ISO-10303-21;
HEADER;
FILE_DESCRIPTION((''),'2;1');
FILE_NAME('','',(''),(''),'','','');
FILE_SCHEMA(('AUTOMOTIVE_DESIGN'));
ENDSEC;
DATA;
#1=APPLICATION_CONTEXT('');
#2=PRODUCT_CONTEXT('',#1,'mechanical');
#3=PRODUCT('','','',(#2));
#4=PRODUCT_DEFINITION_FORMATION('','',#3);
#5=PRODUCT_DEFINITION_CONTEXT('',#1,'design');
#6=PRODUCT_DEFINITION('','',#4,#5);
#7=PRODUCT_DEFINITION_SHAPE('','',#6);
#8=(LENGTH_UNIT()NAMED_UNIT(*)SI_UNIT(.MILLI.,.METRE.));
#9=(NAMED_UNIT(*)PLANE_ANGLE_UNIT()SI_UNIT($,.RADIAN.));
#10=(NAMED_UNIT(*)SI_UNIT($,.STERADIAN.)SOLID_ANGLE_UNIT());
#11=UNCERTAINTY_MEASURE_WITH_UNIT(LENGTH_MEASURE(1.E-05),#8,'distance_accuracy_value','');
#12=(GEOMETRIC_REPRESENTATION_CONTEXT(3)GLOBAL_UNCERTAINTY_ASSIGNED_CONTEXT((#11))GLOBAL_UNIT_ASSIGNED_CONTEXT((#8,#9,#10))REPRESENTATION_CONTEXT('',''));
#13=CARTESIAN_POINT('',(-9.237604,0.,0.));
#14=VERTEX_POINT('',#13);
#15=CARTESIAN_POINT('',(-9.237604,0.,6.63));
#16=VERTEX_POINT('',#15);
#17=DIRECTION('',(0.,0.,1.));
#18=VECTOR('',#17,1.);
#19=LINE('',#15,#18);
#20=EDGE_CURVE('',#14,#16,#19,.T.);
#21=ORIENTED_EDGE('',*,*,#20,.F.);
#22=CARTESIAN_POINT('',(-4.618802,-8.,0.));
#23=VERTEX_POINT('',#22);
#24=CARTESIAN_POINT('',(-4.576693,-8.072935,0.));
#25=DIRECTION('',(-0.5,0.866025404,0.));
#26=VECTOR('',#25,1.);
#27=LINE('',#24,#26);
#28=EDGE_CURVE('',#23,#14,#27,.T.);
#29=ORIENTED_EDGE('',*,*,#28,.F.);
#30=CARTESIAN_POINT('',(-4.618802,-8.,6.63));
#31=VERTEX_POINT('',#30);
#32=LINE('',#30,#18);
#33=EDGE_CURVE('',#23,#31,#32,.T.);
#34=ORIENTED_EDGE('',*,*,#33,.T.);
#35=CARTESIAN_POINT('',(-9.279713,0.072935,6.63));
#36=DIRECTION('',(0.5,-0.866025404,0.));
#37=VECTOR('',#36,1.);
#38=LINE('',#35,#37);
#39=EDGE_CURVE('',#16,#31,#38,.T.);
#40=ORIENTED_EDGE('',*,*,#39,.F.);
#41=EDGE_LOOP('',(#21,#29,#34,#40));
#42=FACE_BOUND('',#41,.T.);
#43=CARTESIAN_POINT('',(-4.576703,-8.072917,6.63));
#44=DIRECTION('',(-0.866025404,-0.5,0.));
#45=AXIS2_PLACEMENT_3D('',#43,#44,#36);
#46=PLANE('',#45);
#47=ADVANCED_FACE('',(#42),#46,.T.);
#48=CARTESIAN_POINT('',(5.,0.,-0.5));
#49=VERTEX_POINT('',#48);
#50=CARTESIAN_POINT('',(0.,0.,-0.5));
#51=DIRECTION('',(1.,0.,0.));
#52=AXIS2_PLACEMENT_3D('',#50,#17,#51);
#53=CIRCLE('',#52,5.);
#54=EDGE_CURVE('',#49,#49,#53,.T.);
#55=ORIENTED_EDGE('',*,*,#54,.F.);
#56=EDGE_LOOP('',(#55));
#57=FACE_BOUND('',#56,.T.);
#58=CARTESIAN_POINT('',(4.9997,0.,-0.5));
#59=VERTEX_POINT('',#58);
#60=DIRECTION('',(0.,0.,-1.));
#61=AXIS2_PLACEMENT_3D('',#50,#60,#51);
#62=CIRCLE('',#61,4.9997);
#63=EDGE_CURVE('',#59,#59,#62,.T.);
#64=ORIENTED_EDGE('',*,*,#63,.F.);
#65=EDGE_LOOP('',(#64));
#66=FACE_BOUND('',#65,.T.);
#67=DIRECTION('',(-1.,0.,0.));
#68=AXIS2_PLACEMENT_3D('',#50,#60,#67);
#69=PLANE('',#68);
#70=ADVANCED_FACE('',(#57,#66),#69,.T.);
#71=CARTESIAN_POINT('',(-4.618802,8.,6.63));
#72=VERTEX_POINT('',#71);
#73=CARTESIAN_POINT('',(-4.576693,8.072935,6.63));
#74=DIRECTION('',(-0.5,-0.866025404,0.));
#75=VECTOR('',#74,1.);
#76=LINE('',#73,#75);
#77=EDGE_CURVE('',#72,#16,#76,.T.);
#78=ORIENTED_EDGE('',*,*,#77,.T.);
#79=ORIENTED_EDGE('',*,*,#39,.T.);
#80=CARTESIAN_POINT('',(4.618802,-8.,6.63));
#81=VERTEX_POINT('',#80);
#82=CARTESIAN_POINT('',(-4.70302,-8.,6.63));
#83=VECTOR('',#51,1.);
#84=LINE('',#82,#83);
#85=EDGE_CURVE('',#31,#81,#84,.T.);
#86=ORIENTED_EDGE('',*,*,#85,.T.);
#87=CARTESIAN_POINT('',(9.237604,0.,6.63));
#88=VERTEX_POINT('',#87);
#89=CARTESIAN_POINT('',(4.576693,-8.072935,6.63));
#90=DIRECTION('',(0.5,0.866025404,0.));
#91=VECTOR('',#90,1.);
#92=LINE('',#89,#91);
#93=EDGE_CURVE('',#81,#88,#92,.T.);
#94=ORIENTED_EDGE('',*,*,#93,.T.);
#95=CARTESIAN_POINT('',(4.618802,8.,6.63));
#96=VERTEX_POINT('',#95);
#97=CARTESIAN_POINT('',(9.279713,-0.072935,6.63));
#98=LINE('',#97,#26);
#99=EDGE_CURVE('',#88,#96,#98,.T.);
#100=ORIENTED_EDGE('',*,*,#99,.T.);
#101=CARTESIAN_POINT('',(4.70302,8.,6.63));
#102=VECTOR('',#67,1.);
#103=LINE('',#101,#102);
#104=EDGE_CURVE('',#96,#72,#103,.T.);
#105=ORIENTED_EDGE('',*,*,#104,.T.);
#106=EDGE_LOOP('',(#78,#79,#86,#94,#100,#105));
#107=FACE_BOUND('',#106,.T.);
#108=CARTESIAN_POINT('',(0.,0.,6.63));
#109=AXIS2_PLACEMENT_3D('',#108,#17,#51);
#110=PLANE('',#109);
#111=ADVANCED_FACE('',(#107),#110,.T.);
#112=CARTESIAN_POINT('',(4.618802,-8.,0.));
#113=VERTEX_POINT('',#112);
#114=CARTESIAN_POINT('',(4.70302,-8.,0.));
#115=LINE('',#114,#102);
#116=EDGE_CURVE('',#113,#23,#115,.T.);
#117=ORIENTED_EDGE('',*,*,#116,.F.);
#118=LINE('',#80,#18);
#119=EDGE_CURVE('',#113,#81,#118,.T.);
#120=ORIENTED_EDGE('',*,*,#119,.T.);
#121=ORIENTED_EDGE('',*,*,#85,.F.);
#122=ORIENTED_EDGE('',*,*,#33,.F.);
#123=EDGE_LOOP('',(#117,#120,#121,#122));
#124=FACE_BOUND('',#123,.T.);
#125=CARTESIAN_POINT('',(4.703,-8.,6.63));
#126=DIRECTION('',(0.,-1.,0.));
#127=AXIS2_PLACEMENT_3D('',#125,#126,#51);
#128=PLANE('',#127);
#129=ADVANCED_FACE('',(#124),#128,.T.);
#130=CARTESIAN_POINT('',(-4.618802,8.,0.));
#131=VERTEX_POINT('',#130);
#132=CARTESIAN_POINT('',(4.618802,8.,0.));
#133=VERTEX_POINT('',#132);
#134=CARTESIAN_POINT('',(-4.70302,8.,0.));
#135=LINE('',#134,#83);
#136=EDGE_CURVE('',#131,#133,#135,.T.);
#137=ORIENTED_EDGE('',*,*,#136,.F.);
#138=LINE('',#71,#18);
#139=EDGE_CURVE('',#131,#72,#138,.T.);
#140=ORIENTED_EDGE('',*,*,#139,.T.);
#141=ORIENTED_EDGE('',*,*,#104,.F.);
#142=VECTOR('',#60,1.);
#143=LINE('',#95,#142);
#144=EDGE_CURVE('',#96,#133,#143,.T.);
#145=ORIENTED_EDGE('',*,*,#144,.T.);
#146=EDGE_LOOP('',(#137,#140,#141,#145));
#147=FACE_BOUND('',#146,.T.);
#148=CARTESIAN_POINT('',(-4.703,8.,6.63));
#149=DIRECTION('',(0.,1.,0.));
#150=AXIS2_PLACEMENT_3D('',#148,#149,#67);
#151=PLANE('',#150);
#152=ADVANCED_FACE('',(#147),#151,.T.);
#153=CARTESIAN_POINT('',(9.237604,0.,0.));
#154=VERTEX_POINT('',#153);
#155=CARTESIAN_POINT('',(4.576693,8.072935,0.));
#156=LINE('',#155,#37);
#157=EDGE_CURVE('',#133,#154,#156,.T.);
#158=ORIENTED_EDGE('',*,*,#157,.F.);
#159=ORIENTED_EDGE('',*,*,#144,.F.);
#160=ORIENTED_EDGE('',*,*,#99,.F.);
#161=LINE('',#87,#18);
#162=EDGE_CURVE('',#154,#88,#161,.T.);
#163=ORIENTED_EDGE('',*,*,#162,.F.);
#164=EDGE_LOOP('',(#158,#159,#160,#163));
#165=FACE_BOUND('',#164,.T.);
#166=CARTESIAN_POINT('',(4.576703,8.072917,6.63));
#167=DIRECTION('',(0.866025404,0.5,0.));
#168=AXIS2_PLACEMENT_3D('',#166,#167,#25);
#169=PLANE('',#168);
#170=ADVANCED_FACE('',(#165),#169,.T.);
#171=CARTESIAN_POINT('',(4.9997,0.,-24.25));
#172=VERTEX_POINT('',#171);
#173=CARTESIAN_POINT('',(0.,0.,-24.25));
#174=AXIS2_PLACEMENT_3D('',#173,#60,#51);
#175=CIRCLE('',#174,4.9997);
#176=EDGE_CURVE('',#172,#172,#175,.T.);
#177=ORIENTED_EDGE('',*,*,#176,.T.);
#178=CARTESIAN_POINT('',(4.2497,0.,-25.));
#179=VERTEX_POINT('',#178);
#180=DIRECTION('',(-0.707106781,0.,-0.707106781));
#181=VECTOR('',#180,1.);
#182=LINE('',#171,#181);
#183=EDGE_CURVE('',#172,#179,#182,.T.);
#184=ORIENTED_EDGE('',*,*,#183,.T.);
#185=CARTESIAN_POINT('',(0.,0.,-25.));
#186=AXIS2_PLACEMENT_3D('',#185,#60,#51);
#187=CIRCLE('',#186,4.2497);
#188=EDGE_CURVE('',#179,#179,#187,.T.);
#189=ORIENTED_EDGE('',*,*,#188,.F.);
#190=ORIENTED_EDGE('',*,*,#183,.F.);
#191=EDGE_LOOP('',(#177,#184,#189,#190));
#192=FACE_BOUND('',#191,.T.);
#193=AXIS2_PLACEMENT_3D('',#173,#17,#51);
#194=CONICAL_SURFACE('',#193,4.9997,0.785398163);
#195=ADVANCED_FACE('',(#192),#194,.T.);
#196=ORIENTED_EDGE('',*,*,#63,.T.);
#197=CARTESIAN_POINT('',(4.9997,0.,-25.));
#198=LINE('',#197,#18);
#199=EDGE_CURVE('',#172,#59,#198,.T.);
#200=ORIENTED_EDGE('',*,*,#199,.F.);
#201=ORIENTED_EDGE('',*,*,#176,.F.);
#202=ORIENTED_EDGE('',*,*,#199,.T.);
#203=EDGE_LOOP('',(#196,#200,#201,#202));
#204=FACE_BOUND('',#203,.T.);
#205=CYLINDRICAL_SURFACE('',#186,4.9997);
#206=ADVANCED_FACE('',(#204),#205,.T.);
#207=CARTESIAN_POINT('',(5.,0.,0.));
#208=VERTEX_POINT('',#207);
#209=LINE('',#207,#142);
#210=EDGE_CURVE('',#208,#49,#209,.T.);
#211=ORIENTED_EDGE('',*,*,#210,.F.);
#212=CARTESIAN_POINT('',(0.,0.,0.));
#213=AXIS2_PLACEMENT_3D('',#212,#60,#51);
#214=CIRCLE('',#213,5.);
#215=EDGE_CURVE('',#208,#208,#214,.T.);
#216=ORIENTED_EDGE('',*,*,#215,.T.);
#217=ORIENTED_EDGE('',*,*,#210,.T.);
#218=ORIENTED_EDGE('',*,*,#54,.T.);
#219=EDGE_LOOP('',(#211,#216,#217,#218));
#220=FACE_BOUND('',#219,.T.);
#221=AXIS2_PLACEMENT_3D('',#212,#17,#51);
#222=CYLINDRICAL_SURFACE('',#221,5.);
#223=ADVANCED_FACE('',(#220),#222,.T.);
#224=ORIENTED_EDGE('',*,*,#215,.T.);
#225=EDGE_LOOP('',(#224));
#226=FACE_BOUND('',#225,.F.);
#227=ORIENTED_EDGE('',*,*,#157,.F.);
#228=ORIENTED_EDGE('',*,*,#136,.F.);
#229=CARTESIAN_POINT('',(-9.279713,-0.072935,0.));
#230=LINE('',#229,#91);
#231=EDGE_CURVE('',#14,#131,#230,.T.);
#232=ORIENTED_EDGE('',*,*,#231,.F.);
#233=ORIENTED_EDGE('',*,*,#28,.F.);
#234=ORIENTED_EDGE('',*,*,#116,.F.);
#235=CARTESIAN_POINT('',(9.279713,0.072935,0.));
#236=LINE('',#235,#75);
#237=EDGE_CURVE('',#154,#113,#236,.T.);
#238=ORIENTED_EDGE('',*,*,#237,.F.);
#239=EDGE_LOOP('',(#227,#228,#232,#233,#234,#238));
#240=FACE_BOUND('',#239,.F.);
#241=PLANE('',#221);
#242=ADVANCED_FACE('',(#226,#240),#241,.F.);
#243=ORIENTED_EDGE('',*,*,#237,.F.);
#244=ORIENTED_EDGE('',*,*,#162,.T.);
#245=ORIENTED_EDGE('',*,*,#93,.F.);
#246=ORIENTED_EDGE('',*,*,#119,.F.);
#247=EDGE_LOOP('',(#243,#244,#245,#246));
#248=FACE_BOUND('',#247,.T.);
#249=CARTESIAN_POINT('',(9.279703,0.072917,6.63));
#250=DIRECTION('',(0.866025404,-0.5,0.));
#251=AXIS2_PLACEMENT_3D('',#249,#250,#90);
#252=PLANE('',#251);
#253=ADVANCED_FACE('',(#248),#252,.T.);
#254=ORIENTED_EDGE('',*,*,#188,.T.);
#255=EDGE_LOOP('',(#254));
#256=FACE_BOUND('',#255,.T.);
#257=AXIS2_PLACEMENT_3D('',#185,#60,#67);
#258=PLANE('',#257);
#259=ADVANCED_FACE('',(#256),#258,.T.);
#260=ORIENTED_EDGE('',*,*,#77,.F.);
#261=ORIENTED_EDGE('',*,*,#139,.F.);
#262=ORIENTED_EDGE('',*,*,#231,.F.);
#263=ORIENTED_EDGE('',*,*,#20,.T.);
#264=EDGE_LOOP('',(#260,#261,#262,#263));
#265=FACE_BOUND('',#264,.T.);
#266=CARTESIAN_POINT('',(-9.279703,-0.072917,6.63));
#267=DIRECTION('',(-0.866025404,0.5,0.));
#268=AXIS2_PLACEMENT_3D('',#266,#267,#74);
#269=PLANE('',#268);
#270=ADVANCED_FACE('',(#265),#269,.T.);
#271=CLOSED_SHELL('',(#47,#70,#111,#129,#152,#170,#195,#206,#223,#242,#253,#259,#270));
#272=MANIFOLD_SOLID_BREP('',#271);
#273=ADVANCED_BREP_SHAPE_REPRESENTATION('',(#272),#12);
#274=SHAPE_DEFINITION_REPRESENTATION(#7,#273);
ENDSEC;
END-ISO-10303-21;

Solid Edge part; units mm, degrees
sketch "Sketch1" plane through (0, 0, 0) normal (0, 0, 1) x (1, 0, 0)
  circle A0 centre (0, 0) radius 9.28
  dimension "D1" = 18.56
extrude "Protrusion1" add sketch "Sketch1" along normal blind 6.63
sketch "Sketch2" plane through (0, 0, 0) normal (0, 0, -1) x (1, 0, 0)
  circle A0 centre (0, 0) radius 5
extrude "Protrusion2" add sketch "Sketch2" along normal blind 25
sketch "Sketch3" plane through (0, 0, -25) normal (0, 0, -1) x (1, 0, 0)
  circle A0 centre (0, 0) radius 4.9997
extrude "Cutout1" cut sketch "Sketch3" against normal blind 24.5 flip side to cut
chamfer "Chamfer_1" distance 0.75 angle 45 1 edges at (-4.9997, 0, -25)
sketch "Sketch4" plane through (0, 0, 6.63) normal (0, 0, 1) x (1, 0, 0)
  line L0 (-4.703, 8) -> (4.703, 8)
  dimension "D1" = 16
extrude "Cutout2" cut sketch "Sketch4" against normal up to next material side at (0, 8.05, 6.63)
pattern_circular "Pattern1" count 6 over 360 about axis through (0, 0, 6.63) along (0, 0, 1) of "Cutout2"
properties part number "24104507"
